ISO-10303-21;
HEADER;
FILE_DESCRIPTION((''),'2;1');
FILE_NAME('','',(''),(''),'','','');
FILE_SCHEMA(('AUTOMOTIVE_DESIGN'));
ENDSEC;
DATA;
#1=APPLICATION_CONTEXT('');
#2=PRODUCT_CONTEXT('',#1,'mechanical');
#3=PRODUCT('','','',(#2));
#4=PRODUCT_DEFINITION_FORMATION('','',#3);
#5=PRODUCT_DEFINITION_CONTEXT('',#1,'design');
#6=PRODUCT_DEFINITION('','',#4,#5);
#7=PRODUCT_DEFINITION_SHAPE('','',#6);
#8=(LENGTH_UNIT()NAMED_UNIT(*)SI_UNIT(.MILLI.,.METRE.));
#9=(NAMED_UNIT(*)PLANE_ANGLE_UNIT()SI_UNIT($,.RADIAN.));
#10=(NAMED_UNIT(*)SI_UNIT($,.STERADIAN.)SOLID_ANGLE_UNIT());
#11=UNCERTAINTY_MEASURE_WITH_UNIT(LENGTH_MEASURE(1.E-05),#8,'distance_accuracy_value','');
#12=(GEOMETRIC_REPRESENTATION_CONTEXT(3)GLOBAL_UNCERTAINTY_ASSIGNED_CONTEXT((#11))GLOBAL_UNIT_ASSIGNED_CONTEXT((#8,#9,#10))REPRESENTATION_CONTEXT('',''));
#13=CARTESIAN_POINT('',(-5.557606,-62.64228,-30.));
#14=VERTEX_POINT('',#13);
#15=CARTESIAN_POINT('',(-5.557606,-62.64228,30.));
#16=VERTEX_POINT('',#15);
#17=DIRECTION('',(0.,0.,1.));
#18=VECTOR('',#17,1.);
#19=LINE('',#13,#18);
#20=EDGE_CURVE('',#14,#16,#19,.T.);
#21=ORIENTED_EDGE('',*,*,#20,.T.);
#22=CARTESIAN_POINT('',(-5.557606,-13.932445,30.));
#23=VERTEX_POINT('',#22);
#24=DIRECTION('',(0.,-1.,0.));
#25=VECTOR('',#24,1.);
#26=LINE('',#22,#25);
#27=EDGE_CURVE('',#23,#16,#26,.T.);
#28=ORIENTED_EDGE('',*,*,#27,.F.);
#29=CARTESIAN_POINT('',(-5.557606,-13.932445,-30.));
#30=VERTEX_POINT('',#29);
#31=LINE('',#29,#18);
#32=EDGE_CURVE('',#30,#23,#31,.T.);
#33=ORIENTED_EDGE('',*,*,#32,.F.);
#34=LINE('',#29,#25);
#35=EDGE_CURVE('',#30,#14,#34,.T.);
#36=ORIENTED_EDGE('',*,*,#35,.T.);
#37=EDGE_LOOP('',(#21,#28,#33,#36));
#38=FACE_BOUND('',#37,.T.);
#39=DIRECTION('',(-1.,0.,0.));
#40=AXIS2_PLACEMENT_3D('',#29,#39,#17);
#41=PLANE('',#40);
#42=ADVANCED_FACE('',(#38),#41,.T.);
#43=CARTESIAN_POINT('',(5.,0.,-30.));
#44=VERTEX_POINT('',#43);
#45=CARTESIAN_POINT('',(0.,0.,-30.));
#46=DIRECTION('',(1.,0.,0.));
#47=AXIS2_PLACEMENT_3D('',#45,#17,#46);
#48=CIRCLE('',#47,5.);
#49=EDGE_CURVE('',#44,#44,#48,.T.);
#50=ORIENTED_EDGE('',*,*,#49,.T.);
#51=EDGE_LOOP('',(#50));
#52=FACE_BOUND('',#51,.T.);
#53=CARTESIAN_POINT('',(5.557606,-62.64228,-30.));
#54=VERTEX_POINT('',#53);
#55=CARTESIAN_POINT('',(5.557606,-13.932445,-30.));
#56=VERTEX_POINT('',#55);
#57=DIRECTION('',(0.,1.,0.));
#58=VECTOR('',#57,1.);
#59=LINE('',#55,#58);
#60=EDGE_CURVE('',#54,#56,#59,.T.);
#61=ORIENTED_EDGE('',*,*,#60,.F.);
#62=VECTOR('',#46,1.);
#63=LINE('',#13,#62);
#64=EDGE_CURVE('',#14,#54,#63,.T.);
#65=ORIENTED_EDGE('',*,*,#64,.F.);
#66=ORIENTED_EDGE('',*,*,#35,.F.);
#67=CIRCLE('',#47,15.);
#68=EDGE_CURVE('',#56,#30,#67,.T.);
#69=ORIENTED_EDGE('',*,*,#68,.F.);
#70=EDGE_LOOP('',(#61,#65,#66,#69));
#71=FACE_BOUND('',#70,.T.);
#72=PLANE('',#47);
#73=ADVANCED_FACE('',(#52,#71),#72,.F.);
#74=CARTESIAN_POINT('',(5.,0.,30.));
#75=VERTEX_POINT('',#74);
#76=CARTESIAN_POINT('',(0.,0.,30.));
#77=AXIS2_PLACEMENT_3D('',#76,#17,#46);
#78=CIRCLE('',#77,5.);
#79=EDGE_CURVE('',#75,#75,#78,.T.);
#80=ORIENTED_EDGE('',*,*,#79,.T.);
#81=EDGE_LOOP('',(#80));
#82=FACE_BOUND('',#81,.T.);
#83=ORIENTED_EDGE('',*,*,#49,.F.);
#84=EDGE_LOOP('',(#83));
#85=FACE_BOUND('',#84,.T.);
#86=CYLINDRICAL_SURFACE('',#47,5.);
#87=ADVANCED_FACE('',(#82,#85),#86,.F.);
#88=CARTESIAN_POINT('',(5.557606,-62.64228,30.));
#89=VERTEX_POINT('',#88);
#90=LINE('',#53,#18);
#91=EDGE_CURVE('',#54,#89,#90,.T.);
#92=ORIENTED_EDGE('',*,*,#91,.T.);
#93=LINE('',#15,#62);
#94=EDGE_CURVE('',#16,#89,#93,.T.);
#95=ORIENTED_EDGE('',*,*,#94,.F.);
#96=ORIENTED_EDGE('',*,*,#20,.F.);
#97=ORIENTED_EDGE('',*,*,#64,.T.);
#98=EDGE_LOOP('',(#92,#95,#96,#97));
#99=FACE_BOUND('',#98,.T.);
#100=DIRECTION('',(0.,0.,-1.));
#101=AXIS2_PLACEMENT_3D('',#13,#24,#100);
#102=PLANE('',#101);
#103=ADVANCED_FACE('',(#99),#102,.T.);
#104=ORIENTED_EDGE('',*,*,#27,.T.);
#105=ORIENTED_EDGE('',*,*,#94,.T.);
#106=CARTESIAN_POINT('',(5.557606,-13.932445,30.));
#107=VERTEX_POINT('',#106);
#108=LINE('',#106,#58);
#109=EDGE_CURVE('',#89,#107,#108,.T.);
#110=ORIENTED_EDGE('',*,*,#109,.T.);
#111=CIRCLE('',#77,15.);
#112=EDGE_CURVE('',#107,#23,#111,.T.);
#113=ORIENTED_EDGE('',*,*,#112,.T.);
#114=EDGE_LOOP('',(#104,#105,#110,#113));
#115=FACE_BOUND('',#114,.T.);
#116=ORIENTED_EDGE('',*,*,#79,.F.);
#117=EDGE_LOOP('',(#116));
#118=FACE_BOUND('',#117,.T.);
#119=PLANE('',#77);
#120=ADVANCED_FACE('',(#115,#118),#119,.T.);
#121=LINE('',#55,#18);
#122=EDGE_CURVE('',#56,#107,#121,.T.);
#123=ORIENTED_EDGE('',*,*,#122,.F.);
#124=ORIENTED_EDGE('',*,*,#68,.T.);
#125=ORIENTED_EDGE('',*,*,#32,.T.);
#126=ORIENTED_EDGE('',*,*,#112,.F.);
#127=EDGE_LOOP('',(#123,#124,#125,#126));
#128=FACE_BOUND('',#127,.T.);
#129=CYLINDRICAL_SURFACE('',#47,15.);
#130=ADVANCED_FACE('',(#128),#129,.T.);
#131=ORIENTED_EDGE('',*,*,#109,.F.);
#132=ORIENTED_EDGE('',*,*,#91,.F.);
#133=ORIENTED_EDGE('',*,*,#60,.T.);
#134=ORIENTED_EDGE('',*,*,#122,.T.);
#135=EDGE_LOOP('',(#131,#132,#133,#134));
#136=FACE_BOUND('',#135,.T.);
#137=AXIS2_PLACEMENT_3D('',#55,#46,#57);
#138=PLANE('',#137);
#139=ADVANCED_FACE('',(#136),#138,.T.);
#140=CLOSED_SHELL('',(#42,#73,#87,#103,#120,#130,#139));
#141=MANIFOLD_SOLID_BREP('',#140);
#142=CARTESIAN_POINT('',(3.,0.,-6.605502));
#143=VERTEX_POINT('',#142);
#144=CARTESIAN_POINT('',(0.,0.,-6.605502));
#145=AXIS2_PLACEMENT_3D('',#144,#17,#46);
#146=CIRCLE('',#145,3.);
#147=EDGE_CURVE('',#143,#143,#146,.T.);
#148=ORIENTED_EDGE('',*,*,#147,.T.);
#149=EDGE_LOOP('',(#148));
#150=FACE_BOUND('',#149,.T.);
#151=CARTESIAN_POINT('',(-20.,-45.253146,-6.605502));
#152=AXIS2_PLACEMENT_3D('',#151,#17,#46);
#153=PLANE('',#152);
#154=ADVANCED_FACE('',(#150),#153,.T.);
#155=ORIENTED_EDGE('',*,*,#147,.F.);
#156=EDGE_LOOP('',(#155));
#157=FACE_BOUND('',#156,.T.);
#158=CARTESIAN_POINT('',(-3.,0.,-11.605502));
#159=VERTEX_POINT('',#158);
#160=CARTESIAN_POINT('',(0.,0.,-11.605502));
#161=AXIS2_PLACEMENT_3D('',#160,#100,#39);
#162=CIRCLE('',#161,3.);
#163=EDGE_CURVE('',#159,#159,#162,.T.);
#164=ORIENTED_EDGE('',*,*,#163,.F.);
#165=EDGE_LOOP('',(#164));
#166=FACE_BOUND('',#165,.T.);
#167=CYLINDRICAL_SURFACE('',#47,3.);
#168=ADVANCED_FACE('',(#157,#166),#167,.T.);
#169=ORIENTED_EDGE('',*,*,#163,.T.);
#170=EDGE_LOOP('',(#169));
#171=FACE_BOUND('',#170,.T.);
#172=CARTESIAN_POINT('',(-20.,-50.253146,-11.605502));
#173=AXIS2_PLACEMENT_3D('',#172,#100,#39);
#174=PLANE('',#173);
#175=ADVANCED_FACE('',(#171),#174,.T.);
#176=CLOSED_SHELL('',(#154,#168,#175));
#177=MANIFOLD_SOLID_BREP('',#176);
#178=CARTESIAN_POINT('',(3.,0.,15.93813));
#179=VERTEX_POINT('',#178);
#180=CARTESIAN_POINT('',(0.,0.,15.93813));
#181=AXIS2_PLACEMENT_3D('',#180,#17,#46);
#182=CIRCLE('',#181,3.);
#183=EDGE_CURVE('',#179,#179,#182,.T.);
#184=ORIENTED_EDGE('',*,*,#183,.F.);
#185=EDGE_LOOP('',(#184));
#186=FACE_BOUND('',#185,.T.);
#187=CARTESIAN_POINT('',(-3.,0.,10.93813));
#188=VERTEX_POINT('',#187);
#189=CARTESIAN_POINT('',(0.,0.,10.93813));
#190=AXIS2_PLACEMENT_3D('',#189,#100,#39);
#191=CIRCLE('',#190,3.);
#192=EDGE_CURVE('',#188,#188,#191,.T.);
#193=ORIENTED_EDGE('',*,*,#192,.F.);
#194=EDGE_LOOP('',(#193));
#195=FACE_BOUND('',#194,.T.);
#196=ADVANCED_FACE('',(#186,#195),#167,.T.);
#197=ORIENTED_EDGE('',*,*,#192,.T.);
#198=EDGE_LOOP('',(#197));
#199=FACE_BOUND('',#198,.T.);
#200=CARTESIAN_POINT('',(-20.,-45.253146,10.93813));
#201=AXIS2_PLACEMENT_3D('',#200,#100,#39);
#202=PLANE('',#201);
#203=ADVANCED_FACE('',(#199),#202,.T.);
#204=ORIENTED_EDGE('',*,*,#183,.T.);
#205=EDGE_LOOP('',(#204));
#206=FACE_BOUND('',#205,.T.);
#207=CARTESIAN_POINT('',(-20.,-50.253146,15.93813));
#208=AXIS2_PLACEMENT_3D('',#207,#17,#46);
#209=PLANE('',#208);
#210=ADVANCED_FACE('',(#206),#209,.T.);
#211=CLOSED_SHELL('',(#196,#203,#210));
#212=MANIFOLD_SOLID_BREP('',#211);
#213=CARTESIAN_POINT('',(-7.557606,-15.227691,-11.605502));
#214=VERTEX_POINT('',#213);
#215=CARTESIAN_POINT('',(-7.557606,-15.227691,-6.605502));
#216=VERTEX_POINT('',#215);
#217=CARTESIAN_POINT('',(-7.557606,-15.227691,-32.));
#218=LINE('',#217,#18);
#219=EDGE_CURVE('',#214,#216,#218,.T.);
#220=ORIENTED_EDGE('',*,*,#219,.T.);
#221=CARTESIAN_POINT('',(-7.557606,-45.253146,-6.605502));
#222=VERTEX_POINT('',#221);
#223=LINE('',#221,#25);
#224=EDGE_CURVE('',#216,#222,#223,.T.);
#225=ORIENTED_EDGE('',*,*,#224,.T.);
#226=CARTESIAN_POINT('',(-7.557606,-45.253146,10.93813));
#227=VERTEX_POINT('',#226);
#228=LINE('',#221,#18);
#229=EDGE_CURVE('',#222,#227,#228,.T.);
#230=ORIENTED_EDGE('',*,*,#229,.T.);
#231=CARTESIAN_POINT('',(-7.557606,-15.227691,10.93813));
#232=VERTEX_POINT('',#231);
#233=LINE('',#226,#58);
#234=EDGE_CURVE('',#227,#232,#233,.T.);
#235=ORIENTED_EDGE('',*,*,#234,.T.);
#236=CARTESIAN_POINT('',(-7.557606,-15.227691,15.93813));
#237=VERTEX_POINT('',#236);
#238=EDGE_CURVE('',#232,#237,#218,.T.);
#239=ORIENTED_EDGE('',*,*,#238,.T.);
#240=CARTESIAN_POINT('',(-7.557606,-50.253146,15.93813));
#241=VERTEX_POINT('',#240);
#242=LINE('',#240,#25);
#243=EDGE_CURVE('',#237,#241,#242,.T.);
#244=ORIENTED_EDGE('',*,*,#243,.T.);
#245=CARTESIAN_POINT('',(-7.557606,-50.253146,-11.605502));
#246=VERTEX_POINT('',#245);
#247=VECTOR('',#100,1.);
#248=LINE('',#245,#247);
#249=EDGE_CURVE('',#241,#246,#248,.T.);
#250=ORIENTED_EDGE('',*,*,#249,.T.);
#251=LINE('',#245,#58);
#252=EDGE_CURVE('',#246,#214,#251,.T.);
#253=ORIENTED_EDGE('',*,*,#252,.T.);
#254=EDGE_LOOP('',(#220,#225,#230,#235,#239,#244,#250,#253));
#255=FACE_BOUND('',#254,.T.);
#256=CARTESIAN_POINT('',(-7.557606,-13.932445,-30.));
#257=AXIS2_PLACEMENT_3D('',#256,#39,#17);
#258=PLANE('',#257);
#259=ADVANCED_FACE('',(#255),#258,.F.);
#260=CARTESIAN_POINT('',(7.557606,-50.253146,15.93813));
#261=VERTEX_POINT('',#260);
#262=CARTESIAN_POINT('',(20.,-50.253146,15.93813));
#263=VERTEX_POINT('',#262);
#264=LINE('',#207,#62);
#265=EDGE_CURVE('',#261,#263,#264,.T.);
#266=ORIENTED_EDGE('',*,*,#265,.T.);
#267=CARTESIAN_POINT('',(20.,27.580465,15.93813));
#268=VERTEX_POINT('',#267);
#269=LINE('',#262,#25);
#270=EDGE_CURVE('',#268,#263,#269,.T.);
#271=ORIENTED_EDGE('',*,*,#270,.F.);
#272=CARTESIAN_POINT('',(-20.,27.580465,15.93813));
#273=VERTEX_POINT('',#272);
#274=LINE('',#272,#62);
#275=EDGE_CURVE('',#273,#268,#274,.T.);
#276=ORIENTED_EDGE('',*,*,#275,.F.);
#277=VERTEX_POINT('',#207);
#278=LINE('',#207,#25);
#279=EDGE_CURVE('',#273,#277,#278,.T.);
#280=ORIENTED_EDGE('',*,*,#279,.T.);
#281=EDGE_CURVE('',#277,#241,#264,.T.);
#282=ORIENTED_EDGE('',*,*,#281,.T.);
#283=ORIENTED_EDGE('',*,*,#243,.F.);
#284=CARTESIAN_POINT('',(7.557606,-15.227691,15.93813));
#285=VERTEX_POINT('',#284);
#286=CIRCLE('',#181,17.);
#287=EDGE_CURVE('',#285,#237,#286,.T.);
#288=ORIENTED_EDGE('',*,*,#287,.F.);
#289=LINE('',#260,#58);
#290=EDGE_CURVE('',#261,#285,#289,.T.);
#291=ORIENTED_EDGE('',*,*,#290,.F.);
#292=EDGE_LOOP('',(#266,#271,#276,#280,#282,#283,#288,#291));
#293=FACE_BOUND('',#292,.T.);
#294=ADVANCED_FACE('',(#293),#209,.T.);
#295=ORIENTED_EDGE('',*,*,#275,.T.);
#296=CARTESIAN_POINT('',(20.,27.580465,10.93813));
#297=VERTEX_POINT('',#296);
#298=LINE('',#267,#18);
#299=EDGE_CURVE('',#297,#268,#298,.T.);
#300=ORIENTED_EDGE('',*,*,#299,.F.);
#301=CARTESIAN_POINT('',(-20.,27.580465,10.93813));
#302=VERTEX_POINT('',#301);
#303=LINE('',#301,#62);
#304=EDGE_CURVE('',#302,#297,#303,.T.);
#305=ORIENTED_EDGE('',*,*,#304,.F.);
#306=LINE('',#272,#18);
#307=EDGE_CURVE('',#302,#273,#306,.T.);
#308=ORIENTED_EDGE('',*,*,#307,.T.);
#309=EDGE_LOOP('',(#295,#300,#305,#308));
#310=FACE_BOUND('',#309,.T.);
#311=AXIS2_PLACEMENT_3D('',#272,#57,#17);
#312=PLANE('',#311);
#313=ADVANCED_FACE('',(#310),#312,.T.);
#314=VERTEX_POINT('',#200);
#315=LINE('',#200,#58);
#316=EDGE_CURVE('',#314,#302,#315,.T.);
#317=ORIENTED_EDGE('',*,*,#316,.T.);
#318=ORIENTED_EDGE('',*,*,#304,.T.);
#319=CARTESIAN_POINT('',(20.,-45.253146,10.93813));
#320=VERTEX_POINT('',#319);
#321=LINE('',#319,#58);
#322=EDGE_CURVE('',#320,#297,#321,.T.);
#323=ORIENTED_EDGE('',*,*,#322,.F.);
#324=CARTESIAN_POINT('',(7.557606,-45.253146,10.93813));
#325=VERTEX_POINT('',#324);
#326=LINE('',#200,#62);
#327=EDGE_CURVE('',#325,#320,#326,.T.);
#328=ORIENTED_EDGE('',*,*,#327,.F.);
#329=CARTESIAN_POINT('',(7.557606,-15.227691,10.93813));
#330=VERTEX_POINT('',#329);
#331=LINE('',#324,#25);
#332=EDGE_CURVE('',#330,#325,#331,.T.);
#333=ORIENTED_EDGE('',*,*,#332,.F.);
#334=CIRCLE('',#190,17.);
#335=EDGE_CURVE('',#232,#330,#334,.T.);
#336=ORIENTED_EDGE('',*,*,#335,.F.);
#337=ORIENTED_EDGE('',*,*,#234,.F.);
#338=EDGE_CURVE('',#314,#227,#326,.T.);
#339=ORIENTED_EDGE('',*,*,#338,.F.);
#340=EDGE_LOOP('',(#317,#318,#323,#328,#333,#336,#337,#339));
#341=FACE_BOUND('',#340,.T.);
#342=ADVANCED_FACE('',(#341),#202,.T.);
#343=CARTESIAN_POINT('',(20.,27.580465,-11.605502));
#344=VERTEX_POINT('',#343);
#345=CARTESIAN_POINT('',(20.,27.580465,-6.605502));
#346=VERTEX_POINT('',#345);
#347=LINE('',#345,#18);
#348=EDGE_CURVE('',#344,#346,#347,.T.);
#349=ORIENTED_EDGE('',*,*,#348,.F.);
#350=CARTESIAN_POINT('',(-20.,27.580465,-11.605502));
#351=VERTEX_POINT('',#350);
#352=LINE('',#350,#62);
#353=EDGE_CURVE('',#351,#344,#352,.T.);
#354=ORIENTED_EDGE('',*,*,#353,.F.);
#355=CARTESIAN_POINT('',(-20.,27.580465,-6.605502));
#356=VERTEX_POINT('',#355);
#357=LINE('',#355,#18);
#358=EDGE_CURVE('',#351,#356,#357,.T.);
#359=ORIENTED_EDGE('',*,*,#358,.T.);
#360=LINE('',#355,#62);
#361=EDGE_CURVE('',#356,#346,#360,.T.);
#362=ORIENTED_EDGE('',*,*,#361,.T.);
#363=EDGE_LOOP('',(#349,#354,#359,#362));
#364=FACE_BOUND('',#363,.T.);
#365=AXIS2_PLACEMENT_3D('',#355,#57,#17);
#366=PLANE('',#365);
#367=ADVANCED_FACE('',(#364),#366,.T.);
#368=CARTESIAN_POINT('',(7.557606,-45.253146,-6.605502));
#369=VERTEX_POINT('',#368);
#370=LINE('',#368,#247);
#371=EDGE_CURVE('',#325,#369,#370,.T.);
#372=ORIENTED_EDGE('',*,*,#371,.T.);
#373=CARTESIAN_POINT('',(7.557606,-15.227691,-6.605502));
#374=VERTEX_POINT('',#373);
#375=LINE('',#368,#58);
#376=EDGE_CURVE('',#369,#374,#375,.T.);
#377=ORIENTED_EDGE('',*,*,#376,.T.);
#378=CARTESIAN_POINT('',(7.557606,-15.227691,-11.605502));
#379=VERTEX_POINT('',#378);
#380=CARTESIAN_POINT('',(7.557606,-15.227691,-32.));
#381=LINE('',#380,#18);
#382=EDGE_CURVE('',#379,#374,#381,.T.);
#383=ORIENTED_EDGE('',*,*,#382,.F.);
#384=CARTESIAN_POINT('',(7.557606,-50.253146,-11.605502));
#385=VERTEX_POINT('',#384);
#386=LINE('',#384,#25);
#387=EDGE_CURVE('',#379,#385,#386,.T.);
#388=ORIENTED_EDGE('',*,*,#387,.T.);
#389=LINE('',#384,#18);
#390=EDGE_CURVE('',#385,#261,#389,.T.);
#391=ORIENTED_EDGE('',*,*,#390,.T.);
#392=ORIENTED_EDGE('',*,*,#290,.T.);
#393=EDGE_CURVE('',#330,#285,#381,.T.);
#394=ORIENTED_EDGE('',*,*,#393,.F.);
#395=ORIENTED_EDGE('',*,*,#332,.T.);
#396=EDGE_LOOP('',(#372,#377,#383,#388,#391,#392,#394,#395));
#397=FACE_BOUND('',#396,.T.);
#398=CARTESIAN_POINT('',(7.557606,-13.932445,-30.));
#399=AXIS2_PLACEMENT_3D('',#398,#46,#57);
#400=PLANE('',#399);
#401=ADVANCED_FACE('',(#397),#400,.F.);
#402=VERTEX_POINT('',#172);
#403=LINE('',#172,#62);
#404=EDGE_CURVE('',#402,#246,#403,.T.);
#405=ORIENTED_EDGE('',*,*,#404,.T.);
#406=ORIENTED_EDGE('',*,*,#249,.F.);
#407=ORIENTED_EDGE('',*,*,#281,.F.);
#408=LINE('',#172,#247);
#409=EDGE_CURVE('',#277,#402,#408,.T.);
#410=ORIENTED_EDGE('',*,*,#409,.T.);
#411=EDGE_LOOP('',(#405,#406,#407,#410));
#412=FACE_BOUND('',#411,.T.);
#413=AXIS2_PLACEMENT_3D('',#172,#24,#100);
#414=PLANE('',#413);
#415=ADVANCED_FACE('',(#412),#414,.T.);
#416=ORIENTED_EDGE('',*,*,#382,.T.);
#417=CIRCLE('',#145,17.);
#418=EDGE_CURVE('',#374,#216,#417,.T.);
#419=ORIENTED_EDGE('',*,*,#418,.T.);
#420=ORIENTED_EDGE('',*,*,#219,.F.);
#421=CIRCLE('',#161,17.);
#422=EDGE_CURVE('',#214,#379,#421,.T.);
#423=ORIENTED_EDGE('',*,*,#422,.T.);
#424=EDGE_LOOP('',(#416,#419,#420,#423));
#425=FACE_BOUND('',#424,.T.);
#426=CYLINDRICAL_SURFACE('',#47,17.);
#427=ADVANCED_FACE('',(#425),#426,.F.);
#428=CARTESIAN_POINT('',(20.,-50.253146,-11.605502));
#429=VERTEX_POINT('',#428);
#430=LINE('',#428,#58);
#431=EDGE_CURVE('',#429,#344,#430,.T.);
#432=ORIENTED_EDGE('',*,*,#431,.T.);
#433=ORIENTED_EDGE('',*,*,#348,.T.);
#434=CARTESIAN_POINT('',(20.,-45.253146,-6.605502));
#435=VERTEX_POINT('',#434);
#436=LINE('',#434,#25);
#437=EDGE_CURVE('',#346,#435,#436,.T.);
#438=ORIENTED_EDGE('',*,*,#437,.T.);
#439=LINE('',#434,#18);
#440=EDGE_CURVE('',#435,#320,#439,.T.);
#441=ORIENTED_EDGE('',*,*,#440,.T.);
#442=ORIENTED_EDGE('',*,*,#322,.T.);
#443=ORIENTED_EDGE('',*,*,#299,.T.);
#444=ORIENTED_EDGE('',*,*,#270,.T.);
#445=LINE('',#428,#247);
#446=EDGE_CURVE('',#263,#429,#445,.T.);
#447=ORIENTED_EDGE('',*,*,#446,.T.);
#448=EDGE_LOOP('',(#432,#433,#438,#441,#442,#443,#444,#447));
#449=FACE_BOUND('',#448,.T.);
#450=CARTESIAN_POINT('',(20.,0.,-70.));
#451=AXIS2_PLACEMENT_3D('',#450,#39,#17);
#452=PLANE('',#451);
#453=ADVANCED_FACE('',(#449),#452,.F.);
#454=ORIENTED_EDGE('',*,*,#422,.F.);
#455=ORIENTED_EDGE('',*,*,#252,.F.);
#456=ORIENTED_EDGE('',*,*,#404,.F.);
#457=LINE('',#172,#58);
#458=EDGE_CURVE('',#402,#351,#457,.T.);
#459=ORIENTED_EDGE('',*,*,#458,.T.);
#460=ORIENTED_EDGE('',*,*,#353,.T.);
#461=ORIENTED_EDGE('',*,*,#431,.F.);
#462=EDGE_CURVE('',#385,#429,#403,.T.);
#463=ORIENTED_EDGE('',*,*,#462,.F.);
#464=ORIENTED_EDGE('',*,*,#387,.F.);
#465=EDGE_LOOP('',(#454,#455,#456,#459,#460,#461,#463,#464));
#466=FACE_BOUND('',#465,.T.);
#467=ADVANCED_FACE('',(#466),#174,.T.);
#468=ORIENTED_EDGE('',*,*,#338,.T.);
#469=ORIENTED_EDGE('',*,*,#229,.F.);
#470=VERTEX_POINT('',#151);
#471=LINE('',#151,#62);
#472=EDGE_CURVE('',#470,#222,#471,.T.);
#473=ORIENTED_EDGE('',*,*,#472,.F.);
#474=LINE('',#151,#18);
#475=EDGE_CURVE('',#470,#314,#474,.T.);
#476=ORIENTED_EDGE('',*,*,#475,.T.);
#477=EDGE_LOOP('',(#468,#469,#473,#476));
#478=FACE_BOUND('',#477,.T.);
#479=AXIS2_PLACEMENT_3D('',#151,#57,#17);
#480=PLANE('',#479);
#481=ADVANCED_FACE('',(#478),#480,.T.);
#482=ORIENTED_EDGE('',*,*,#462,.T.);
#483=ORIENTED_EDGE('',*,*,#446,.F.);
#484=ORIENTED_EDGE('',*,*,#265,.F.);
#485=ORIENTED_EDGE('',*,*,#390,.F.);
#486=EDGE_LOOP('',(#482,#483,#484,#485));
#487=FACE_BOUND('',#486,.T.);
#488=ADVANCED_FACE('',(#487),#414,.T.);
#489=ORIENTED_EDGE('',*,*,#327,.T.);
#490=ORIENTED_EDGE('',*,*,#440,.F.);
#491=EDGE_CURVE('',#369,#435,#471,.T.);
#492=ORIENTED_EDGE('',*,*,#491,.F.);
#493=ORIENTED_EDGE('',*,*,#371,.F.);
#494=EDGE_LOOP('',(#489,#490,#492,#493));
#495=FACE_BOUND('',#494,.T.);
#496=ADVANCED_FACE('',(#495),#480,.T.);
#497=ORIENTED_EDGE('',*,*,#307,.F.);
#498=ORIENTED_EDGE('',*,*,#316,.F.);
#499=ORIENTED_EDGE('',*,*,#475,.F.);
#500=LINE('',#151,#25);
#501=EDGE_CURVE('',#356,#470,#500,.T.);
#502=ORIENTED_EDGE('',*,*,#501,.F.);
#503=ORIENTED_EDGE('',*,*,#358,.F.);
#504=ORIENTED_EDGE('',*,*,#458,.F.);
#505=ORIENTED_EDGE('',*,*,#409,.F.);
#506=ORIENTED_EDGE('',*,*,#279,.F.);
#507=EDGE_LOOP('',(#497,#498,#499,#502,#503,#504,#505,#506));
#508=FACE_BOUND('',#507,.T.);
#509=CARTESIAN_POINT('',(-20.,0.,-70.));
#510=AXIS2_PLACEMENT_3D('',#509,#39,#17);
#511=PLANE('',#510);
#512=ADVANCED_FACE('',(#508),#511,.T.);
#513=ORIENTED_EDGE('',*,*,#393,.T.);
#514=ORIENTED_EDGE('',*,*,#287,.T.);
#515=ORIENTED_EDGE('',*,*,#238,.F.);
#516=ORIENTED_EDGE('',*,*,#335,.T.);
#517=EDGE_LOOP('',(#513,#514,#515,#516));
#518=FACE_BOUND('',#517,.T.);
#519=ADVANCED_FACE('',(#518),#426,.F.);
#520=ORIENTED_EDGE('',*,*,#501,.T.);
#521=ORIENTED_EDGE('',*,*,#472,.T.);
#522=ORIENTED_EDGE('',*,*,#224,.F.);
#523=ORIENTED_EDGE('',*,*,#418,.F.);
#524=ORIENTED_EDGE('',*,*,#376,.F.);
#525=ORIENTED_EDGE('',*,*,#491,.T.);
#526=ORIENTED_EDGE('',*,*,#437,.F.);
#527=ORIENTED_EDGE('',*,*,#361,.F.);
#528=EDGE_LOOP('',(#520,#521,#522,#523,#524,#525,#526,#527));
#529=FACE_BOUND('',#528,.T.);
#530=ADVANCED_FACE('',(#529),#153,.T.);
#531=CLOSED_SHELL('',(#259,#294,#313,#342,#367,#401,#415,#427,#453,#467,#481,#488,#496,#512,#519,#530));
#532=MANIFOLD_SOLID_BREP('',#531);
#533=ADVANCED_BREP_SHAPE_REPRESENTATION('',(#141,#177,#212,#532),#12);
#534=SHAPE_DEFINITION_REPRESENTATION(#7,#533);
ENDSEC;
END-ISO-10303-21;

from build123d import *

# Parameters (mm, degrees)
EXTRUDE_5_DEPTH      = 30
EXTRUDE_5_DEPTH_BACK = 30
F_1_FR_R             = 5
EXTRUDE_6_DEPTH      = 20
EXTRUDE_6_DEPTH_BACK = 20
OTHER_START          = -11.605501957
OTHER_1_DEPTH        = 27.543632219
OTHER_START_2        = 10.938130262
OTHER_1_2_OUTLINE_R  = 3
OTHER_1_2_DEPTH      = 5
OTHER_1_3_OUTLINE_R  = 3
OTHER_1_3_DEPTH      = 5


# Read off the part's stored shape, not the designer's step: Отступ1
with BuildPart() as part:
    # Эскиз1_fr → Бобышка-Вытянуть5 (new, two sides: drawn at the far end of the back side and taken through both)
    with BuildSketch(Plane.XY.offset(-EXTRUDE_5_DEPTH_BACK)):
        with BuildLine():
            Line((-5.557606452, -13.932444528), (-5.557606452, -62.642280008))
            Line((-5.557606452, -62.642280008), (5.557606452, -62.642280008))
            Line((5.557606452, -62.642280008), (5.557606452, -13.932444528))
            ThreePointArc((5.557606452, -13.932444528), (0, 15), (-5.557606452, -13.932444528))
        make_face()
        Circle(F_1_FR_R, mode=Mode.SUBTRACT)
    extrude(amount=EXTRUDE_5_DEPTH + EXTRUDE_5_DEPTH_BACK)


with BuildPart() as body_2:
    # Эскиз3 → Бобышка-Вытянуть6 (new, two sides: drawn at the far end of the back side and taken through both)
    with BuildSketch(Plane(origin=(0, 0, 0), x_dir=(0, 0, -1), z_dir=(1, 0, 0)).offset(-EXTRUDE_6_DEPTH_BACK)):
        Polygon((-58.394498043, -50.25314581), (-85.938130262, -50.25314581), (-85.938130262, 27.580465306), (-80.938130262, 27.580465306), (-80.938130262, -45.25314581), (-63.394498043, -45.25314581), (-63.394498043, 27.580465306), (-58.394498043, 27.580465306), align=None)
    extrude(amount=EXTRUDE_6_DEPTH + EXTRUDE_6_DEPTH_BACK)


with BuildPart() as body_2_1:
    # Move Body 1: moved
    add(body_2.part.moved(Location((0, 0, -70))))

    # Отступ1 outline → Отступ1 (cut)
    with BuildSketch(Plane.XY.offset(OTHER_START)):
        with BuildLine():
            ThreePointArc((7.557606452, -15.227691378), (0, 17), (-7.557606452, -15.227691378))
            Line((-7.557606452, -15.227691378), (-7.557606452, -50.25314581))
            Line((-7.557606452, -50.25314581), (7.557606452, -50.25314581))
            Line((7.557606452, -50.25314581), (7.557606452, -15.227691378))
        make_face()
    extrude(amount=OTHER_1_DEPTH, mode=Mode.SUBTRACT)


with BuildPart() as body_3:
    # Other 1 2 outline → Other 1 2 (new body)
    with BuildSketch(Plane.XY.offset(OTHER_START_2)):
        Circle(OTHER_1_2_OUTLINE_R)
    extrude(amount=OTHER_1_2_DEPTH)


with BuildPart() as body_4:
    # Other 1 3 outline → Other 1 3 (new body)
    with BuildSketch(Plane.XY.offset(OTHER_START)):
        Circle(OTHER_1_3_OUTLINE_R)
    extrude(amount=OTHER_1_3_DEPTH)


solid = Compound([part.part, body_2_1.part, body_3.part, body_4.part])
